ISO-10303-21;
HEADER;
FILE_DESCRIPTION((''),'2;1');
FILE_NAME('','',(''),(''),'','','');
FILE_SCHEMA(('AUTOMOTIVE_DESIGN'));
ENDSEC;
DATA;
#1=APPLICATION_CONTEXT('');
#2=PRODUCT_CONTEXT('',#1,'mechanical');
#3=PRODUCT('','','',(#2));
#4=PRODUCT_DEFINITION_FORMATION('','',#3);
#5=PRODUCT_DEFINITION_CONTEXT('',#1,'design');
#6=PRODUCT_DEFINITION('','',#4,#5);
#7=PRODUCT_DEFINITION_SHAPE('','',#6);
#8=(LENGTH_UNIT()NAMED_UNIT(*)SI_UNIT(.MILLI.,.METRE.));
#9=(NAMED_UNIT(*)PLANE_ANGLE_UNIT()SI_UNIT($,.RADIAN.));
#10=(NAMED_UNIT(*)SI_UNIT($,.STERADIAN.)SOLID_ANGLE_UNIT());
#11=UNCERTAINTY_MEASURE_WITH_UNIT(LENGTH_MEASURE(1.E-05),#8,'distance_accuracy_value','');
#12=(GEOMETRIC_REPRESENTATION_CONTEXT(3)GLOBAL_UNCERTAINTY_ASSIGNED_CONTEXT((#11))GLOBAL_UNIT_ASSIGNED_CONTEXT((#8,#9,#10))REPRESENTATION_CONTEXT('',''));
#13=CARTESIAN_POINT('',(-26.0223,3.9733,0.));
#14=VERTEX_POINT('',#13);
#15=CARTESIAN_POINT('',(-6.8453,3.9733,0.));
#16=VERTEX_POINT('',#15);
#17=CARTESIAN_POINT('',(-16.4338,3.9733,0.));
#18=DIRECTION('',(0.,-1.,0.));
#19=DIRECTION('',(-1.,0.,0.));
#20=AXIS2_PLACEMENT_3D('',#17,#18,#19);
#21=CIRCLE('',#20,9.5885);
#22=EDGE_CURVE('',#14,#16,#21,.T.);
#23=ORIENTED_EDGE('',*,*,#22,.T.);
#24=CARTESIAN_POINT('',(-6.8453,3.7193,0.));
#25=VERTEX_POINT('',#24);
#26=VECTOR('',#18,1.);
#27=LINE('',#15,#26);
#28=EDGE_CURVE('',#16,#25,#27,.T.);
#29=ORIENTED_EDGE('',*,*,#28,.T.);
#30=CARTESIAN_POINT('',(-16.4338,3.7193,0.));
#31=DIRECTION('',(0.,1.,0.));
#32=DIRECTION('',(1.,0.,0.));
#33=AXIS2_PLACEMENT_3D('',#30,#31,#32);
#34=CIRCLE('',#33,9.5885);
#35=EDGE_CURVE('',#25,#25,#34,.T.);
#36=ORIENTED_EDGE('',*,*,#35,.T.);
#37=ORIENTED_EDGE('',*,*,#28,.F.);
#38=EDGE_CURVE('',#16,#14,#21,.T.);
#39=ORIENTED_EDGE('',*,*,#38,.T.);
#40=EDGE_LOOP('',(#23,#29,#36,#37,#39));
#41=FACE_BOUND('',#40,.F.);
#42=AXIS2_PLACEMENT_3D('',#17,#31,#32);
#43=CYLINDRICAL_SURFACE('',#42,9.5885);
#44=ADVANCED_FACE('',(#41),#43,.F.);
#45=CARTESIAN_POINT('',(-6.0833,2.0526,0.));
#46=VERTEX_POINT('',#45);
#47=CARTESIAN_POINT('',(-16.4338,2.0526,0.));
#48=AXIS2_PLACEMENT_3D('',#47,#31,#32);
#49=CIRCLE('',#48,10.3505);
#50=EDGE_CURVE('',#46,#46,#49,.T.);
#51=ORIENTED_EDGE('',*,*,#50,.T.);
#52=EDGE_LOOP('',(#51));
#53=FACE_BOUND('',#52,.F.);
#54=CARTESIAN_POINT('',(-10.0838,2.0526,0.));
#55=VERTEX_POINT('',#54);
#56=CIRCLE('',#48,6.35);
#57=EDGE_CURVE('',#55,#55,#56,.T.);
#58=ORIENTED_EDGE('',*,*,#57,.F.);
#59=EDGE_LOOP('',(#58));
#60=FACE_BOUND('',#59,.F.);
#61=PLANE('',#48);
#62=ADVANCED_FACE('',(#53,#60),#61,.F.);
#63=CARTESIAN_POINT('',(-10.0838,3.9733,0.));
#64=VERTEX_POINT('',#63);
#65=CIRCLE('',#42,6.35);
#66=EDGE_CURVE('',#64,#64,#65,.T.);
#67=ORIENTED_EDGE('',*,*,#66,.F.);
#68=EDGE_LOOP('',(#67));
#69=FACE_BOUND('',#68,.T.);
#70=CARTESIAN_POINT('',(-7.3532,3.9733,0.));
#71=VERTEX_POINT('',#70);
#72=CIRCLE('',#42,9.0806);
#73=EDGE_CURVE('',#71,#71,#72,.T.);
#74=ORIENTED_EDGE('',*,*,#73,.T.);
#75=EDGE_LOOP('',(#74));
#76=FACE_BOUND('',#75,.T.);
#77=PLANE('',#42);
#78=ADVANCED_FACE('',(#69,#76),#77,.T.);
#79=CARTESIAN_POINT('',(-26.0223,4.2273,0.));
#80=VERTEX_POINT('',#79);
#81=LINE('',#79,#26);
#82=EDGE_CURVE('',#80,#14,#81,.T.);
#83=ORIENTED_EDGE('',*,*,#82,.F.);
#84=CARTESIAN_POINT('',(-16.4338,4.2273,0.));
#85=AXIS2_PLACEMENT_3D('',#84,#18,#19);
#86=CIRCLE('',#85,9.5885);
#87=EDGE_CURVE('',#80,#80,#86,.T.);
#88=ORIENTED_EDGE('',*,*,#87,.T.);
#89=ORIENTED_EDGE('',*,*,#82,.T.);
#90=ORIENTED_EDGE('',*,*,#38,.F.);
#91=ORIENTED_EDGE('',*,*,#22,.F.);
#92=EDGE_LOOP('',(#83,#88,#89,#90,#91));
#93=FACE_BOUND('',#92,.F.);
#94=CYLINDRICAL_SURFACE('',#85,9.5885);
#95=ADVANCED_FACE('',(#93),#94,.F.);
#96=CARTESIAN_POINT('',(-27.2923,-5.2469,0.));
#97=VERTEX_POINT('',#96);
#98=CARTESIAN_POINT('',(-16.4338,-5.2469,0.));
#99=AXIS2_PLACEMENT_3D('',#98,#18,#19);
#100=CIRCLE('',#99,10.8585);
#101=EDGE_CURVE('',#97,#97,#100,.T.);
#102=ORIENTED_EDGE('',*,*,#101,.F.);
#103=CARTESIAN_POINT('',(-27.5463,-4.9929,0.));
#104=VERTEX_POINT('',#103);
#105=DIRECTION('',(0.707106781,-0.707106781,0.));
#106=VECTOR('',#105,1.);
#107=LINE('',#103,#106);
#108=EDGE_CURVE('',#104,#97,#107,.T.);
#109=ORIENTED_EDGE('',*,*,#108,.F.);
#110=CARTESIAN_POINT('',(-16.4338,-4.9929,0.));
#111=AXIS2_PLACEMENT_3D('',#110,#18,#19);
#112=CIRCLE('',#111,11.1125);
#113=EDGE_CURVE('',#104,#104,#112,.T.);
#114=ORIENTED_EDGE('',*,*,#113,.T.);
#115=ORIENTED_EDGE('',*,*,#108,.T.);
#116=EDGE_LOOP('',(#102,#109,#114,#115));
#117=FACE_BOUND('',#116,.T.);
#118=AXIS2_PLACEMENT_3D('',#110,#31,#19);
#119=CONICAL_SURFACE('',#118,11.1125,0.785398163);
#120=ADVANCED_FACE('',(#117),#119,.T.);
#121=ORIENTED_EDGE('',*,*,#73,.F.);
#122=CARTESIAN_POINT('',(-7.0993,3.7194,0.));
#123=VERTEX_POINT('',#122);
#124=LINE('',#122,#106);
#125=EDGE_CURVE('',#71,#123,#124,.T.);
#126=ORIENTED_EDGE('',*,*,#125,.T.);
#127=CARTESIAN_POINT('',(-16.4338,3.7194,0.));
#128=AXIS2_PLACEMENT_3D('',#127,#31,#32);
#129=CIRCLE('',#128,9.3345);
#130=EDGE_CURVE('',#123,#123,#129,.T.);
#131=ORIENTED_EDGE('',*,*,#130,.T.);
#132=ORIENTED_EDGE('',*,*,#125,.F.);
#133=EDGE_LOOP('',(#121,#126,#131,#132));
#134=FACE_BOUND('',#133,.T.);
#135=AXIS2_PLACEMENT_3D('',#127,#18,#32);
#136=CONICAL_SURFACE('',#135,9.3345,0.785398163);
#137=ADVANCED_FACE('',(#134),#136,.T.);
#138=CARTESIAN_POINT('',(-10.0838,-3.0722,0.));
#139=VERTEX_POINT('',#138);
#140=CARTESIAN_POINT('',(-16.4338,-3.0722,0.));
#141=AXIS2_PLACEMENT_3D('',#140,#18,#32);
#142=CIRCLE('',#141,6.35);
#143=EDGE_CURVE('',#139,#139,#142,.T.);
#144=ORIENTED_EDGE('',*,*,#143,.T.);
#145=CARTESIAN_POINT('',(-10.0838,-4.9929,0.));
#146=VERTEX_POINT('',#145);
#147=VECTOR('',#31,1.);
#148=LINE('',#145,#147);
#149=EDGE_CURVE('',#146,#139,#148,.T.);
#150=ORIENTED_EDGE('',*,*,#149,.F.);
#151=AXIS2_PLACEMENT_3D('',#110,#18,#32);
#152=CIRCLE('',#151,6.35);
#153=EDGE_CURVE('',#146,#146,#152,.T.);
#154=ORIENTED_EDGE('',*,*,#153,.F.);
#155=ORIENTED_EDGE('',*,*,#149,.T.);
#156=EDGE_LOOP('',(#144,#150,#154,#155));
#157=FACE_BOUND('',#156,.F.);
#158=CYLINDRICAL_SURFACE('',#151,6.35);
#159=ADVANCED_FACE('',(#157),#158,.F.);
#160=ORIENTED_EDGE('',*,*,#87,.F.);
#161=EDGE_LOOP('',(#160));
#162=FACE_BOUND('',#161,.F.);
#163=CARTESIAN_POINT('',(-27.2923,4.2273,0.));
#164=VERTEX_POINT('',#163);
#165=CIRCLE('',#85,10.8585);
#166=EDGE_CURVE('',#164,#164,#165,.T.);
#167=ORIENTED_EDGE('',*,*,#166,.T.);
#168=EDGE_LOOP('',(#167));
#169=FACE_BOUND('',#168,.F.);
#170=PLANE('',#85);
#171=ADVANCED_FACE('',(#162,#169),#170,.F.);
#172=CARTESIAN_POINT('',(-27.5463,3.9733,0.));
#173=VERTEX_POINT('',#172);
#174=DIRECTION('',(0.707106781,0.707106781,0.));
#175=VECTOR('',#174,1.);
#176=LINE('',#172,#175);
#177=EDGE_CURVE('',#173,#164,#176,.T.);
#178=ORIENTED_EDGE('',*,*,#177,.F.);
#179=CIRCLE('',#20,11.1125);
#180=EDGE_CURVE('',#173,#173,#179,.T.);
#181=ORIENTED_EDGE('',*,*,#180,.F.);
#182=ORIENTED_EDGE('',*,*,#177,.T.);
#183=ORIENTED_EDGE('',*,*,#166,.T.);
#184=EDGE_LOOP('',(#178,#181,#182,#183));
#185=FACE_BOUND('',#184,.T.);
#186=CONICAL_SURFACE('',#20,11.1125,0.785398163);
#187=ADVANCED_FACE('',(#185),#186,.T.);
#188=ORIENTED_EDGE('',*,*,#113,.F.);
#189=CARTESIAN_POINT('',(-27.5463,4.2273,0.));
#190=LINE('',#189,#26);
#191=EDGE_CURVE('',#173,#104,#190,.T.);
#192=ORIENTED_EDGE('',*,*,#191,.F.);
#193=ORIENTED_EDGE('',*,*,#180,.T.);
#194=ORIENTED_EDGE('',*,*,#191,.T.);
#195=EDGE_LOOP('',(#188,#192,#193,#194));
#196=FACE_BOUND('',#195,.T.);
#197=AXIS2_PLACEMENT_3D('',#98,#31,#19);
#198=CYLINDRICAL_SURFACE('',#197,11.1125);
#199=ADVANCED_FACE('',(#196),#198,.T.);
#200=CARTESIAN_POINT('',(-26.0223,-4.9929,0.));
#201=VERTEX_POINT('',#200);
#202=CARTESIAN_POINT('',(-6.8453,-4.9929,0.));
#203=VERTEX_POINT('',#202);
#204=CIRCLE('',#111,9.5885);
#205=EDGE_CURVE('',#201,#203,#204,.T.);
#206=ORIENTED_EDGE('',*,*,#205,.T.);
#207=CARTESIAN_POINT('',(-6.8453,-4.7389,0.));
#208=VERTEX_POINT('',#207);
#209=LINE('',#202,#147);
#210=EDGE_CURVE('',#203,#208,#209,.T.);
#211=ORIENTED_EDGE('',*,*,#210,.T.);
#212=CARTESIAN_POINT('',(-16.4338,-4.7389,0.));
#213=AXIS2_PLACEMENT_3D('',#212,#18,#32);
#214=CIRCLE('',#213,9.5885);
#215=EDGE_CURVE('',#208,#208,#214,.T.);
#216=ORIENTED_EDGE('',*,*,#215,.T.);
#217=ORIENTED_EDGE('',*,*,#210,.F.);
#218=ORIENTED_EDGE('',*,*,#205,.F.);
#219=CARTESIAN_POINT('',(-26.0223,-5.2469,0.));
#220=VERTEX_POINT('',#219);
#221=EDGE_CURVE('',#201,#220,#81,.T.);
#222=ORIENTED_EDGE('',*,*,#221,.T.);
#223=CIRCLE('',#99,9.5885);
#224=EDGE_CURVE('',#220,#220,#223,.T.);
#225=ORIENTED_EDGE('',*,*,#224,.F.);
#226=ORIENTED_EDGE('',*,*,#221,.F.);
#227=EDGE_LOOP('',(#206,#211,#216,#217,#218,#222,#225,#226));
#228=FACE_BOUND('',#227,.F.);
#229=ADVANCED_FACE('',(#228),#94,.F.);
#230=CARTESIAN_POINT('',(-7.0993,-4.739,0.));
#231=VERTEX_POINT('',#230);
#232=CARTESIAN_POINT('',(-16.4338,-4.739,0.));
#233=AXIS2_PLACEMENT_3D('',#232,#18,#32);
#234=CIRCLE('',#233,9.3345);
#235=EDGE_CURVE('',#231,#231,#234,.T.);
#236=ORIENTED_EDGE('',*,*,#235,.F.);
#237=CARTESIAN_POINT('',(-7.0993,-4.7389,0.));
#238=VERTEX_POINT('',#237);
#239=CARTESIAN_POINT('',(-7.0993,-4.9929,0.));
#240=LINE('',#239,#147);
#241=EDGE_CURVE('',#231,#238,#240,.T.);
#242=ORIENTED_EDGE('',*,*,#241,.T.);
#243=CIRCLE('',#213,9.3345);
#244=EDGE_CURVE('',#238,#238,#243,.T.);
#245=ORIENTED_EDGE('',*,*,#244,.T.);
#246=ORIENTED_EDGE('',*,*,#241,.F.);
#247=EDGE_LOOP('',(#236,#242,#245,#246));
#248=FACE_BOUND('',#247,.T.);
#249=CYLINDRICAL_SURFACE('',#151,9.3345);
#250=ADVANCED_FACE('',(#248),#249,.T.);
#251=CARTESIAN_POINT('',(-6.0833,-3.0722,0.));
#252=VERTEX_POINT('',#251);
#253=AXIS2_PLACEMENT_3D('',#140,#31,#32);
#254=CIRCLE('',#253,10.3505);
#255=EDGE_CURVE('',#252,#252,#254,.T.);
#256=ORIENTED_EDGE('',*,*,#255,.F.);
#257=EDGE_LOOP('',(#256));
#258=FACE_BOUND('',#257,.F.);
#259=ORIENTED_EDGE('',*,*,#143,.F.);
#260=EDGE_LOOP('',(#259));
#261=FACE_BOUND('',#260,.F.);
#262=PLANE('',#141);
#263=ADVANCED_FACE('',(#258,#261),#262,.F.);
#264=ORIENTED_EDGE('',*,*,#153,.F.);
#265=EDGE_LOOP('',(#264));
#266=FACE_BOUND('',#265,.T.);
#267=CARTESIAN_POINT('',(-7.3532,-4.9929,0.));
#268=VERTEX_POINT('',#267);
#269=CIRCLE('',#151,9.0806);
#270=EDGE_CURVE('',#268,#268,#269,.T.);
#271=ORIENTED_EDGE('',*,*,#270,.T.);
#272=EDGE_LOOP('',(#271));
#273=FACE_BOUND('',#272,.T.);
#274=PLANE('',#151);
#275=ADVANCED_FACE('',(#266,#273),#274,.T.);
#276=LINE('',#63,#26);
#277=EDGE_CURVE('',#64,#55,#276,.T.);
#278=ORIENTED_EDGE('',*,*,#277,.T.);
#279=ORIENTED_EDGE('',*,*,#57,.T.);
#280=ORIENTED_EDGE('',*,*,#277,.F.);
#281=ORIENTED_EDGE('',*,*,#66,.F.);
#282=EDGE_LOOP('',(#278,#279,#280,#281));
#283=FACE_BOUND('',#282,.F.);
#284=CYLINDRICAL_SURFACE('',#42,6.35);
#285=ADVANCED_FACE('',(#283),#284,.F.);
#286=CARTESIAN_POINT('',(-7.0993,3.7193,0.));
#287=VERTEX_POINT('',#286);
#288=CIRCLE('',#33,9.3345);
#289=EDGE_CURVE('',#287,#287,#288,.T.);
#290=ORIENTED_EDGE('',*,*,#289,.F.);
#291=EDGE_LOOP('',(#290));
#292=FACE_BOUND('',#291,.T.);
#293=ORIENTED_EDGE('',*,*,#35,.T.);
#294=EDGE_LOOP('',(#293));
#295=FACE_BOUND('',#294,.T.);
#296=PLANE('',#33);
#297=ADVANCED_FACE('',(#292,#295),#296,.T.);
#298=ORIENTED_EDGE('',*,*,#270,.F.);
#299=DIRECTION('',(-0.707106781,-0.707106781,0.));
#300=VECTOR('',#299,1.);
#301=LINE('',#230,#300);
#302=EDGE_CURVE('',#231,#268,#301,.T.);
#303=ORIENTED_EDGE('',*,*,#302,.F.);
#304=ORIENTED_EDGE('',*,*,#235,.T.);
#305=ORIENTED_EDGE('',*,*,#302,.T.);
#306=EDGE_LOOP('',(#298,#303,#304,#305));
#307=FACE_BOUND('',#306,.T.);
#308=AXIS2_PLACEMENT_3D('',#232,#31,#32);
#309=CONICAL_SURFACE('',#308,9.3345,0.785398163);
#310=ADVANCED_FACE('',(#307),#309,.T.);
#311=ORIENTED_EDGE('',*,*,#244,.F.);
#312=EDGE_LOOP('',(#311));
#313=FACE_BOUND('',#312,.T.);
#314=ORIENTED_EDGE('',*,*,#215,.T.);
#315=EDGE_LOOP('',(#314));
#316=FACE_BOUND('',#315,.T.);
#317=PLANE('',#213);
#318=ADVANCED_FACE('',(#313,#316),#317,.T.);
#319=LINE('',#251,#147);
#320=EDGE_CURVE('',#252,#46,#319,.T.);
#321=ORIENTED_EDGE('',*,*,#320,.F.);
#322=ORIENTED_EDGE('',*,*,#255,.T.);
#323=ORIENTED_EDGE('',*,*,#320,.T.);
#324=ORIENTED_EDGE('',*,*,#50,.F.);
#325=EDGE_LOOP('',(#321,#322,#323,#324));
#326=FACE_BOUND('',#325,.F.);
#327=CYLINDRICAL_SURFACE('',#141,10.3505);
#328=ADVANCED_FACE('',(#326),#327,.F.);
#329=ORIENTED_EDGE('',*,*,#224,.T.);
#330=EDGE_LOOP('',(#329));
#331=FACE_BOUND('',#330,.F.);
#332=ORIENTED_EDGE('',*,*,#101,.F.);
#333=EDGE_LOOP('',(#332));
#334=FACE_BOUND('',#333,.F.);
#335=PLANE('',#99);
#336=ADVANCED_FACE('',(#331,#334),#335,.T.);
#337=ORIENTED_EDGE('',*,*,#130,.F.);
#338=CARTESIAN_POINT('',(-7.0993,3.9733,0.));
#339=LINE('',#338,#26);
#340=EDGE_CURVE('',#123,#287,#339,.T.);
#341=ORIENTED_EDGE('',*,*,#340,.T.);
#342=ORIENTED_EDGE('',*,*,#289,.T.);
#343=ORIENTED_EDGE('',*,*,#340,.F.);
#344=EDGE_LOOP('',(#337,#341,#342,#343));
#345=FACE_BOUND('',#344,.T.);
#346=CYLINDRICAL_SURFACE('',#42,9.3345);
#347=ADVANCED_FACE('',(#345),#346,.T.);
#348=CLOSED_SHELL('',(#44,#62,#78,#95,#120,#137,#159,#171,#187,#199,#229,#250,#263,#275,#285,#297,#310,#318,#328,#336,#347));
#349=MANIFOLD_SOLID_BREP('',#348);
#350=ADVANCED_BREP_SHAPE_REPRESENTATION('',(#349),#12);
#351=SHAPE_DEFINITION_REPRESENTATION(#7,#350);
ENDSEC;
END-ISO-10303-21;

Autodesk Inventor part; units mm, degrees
sketch "Sketch1" plane through (0, 0, 0) normal (0, 0, 1) x (1, 0, 0)
  line L0 (-27.5463, 4.2273) -> (-26.0223, 4.2273)
  line L1 (-26.0223, 4.2273) -> (-26.0223, -5.2469)
  line L2 (-26.0223, -5.2469) -> (-27.5463, -5.2469)
  line L3 (-27.5463, -5.2469) -> (-27.5463, 4.2273)
  line L4 (-16.4338, 9.0278) -> (-16.4338, -15.3549)
  dimension "d0" = 9.4742
  dimension "d1" = 1.524
  dimension "d2" = 11.1125
revolve "Revolution1" add sketch "Sketch1" angle 360 about axis through (-16.4338, 9.0278, 0) along (0, -1, 0)
ref_plane "Work Plane1" through (-16.4338, 3.9733, 0) normal (0, 1, 0) x (1, 0, 0)
sketch "Sketch2" plane through (-16.4338, 3.9733, 0) normal (0, 1, 0) x (1, 0, 0)
  circle A0 centre (0, 0) radius 11.1125
  circle A1 centre (0, 0) radius 6.35
  dimension "d5" = 12.7
  dimension "d35" = 22.225
extrude "Extrusion1" add sketch "Sketch2" against normal blind 1.9207
ref_plane "Work Plane2" through (-16.4338, -4.9929, 0) normal (0, -1, 0) x (1, 0, 0)
sketch "Sketch3" plane through (-16.4338, -4.9929, 0) normal (0, -1, 0) x (1, 0, 0)
  circle A0 centre (0, 0) radius 11.1125
  circle A1 centre (0, 0) radius 6.35
  dimension "d9" = 12.7
  dimension "d34" = 22.225
extrude "Extrusion2" add sketch "Sketch3" against normal blind 1.9207
ref_plane "Work Plane3" through (-16.4338, -3.0722, 0) normal (0, 1, 0) x (1, 0, 0)
sketch "Sketch4" plane through (-16.4338, -3.0722, 0) normal (0, 1, 0) x (1, 0, 0)
  circle A0 centre (0, 0) radius 10.3505
  dimension "d13" = 20.701
extrude "Extrusion3" cut sketch "Sketch4" along normal blind 5.1248
sketch "Sketch5" plane through (-16.4338, -4.9929, 0) normal (0, -1, 0) x (1, 0, 0)
  circle A0 centre (0, 0) radius 9.5885 projected
  circle A1 centre (0, 0) radius 9.3345
  dimension "d16" = 0.254
extrude "Extrusion4" cut sketch "Sketch5" against normal blind 0.254
chamfer "Chamfer1" distance 0.254 angle 45 1 edges at (-25.7683, -4.9929, 0)
sketch "Sketch6" plane through (-16.4338, 3.9733, 0) normal (0, 1, 0) x (1, 0, 0)
  circle A0 centre (0, 0) radius 9.5885 projected
  circle A1 centre (0, 0) radius 9.3345
  dimension "d22" = 0.254
extrude "Extrusion5" cut sketch "Sketch6" against normal blind 0.254
chamfer "Chamfer2" distance 0.254 angle 45 1 edges at (-25.7683, 3.9733, 0)
chamfer "Chamfer3" distance 0.254 angle 45 1 edges at (-5.3213, -5.2469, 0)
chamfer "Chamfer4" distance 0.254 angle 45 1 edges at (-5.3213, 4.2273, 0)
properties part number "Outer Casing 1764"
